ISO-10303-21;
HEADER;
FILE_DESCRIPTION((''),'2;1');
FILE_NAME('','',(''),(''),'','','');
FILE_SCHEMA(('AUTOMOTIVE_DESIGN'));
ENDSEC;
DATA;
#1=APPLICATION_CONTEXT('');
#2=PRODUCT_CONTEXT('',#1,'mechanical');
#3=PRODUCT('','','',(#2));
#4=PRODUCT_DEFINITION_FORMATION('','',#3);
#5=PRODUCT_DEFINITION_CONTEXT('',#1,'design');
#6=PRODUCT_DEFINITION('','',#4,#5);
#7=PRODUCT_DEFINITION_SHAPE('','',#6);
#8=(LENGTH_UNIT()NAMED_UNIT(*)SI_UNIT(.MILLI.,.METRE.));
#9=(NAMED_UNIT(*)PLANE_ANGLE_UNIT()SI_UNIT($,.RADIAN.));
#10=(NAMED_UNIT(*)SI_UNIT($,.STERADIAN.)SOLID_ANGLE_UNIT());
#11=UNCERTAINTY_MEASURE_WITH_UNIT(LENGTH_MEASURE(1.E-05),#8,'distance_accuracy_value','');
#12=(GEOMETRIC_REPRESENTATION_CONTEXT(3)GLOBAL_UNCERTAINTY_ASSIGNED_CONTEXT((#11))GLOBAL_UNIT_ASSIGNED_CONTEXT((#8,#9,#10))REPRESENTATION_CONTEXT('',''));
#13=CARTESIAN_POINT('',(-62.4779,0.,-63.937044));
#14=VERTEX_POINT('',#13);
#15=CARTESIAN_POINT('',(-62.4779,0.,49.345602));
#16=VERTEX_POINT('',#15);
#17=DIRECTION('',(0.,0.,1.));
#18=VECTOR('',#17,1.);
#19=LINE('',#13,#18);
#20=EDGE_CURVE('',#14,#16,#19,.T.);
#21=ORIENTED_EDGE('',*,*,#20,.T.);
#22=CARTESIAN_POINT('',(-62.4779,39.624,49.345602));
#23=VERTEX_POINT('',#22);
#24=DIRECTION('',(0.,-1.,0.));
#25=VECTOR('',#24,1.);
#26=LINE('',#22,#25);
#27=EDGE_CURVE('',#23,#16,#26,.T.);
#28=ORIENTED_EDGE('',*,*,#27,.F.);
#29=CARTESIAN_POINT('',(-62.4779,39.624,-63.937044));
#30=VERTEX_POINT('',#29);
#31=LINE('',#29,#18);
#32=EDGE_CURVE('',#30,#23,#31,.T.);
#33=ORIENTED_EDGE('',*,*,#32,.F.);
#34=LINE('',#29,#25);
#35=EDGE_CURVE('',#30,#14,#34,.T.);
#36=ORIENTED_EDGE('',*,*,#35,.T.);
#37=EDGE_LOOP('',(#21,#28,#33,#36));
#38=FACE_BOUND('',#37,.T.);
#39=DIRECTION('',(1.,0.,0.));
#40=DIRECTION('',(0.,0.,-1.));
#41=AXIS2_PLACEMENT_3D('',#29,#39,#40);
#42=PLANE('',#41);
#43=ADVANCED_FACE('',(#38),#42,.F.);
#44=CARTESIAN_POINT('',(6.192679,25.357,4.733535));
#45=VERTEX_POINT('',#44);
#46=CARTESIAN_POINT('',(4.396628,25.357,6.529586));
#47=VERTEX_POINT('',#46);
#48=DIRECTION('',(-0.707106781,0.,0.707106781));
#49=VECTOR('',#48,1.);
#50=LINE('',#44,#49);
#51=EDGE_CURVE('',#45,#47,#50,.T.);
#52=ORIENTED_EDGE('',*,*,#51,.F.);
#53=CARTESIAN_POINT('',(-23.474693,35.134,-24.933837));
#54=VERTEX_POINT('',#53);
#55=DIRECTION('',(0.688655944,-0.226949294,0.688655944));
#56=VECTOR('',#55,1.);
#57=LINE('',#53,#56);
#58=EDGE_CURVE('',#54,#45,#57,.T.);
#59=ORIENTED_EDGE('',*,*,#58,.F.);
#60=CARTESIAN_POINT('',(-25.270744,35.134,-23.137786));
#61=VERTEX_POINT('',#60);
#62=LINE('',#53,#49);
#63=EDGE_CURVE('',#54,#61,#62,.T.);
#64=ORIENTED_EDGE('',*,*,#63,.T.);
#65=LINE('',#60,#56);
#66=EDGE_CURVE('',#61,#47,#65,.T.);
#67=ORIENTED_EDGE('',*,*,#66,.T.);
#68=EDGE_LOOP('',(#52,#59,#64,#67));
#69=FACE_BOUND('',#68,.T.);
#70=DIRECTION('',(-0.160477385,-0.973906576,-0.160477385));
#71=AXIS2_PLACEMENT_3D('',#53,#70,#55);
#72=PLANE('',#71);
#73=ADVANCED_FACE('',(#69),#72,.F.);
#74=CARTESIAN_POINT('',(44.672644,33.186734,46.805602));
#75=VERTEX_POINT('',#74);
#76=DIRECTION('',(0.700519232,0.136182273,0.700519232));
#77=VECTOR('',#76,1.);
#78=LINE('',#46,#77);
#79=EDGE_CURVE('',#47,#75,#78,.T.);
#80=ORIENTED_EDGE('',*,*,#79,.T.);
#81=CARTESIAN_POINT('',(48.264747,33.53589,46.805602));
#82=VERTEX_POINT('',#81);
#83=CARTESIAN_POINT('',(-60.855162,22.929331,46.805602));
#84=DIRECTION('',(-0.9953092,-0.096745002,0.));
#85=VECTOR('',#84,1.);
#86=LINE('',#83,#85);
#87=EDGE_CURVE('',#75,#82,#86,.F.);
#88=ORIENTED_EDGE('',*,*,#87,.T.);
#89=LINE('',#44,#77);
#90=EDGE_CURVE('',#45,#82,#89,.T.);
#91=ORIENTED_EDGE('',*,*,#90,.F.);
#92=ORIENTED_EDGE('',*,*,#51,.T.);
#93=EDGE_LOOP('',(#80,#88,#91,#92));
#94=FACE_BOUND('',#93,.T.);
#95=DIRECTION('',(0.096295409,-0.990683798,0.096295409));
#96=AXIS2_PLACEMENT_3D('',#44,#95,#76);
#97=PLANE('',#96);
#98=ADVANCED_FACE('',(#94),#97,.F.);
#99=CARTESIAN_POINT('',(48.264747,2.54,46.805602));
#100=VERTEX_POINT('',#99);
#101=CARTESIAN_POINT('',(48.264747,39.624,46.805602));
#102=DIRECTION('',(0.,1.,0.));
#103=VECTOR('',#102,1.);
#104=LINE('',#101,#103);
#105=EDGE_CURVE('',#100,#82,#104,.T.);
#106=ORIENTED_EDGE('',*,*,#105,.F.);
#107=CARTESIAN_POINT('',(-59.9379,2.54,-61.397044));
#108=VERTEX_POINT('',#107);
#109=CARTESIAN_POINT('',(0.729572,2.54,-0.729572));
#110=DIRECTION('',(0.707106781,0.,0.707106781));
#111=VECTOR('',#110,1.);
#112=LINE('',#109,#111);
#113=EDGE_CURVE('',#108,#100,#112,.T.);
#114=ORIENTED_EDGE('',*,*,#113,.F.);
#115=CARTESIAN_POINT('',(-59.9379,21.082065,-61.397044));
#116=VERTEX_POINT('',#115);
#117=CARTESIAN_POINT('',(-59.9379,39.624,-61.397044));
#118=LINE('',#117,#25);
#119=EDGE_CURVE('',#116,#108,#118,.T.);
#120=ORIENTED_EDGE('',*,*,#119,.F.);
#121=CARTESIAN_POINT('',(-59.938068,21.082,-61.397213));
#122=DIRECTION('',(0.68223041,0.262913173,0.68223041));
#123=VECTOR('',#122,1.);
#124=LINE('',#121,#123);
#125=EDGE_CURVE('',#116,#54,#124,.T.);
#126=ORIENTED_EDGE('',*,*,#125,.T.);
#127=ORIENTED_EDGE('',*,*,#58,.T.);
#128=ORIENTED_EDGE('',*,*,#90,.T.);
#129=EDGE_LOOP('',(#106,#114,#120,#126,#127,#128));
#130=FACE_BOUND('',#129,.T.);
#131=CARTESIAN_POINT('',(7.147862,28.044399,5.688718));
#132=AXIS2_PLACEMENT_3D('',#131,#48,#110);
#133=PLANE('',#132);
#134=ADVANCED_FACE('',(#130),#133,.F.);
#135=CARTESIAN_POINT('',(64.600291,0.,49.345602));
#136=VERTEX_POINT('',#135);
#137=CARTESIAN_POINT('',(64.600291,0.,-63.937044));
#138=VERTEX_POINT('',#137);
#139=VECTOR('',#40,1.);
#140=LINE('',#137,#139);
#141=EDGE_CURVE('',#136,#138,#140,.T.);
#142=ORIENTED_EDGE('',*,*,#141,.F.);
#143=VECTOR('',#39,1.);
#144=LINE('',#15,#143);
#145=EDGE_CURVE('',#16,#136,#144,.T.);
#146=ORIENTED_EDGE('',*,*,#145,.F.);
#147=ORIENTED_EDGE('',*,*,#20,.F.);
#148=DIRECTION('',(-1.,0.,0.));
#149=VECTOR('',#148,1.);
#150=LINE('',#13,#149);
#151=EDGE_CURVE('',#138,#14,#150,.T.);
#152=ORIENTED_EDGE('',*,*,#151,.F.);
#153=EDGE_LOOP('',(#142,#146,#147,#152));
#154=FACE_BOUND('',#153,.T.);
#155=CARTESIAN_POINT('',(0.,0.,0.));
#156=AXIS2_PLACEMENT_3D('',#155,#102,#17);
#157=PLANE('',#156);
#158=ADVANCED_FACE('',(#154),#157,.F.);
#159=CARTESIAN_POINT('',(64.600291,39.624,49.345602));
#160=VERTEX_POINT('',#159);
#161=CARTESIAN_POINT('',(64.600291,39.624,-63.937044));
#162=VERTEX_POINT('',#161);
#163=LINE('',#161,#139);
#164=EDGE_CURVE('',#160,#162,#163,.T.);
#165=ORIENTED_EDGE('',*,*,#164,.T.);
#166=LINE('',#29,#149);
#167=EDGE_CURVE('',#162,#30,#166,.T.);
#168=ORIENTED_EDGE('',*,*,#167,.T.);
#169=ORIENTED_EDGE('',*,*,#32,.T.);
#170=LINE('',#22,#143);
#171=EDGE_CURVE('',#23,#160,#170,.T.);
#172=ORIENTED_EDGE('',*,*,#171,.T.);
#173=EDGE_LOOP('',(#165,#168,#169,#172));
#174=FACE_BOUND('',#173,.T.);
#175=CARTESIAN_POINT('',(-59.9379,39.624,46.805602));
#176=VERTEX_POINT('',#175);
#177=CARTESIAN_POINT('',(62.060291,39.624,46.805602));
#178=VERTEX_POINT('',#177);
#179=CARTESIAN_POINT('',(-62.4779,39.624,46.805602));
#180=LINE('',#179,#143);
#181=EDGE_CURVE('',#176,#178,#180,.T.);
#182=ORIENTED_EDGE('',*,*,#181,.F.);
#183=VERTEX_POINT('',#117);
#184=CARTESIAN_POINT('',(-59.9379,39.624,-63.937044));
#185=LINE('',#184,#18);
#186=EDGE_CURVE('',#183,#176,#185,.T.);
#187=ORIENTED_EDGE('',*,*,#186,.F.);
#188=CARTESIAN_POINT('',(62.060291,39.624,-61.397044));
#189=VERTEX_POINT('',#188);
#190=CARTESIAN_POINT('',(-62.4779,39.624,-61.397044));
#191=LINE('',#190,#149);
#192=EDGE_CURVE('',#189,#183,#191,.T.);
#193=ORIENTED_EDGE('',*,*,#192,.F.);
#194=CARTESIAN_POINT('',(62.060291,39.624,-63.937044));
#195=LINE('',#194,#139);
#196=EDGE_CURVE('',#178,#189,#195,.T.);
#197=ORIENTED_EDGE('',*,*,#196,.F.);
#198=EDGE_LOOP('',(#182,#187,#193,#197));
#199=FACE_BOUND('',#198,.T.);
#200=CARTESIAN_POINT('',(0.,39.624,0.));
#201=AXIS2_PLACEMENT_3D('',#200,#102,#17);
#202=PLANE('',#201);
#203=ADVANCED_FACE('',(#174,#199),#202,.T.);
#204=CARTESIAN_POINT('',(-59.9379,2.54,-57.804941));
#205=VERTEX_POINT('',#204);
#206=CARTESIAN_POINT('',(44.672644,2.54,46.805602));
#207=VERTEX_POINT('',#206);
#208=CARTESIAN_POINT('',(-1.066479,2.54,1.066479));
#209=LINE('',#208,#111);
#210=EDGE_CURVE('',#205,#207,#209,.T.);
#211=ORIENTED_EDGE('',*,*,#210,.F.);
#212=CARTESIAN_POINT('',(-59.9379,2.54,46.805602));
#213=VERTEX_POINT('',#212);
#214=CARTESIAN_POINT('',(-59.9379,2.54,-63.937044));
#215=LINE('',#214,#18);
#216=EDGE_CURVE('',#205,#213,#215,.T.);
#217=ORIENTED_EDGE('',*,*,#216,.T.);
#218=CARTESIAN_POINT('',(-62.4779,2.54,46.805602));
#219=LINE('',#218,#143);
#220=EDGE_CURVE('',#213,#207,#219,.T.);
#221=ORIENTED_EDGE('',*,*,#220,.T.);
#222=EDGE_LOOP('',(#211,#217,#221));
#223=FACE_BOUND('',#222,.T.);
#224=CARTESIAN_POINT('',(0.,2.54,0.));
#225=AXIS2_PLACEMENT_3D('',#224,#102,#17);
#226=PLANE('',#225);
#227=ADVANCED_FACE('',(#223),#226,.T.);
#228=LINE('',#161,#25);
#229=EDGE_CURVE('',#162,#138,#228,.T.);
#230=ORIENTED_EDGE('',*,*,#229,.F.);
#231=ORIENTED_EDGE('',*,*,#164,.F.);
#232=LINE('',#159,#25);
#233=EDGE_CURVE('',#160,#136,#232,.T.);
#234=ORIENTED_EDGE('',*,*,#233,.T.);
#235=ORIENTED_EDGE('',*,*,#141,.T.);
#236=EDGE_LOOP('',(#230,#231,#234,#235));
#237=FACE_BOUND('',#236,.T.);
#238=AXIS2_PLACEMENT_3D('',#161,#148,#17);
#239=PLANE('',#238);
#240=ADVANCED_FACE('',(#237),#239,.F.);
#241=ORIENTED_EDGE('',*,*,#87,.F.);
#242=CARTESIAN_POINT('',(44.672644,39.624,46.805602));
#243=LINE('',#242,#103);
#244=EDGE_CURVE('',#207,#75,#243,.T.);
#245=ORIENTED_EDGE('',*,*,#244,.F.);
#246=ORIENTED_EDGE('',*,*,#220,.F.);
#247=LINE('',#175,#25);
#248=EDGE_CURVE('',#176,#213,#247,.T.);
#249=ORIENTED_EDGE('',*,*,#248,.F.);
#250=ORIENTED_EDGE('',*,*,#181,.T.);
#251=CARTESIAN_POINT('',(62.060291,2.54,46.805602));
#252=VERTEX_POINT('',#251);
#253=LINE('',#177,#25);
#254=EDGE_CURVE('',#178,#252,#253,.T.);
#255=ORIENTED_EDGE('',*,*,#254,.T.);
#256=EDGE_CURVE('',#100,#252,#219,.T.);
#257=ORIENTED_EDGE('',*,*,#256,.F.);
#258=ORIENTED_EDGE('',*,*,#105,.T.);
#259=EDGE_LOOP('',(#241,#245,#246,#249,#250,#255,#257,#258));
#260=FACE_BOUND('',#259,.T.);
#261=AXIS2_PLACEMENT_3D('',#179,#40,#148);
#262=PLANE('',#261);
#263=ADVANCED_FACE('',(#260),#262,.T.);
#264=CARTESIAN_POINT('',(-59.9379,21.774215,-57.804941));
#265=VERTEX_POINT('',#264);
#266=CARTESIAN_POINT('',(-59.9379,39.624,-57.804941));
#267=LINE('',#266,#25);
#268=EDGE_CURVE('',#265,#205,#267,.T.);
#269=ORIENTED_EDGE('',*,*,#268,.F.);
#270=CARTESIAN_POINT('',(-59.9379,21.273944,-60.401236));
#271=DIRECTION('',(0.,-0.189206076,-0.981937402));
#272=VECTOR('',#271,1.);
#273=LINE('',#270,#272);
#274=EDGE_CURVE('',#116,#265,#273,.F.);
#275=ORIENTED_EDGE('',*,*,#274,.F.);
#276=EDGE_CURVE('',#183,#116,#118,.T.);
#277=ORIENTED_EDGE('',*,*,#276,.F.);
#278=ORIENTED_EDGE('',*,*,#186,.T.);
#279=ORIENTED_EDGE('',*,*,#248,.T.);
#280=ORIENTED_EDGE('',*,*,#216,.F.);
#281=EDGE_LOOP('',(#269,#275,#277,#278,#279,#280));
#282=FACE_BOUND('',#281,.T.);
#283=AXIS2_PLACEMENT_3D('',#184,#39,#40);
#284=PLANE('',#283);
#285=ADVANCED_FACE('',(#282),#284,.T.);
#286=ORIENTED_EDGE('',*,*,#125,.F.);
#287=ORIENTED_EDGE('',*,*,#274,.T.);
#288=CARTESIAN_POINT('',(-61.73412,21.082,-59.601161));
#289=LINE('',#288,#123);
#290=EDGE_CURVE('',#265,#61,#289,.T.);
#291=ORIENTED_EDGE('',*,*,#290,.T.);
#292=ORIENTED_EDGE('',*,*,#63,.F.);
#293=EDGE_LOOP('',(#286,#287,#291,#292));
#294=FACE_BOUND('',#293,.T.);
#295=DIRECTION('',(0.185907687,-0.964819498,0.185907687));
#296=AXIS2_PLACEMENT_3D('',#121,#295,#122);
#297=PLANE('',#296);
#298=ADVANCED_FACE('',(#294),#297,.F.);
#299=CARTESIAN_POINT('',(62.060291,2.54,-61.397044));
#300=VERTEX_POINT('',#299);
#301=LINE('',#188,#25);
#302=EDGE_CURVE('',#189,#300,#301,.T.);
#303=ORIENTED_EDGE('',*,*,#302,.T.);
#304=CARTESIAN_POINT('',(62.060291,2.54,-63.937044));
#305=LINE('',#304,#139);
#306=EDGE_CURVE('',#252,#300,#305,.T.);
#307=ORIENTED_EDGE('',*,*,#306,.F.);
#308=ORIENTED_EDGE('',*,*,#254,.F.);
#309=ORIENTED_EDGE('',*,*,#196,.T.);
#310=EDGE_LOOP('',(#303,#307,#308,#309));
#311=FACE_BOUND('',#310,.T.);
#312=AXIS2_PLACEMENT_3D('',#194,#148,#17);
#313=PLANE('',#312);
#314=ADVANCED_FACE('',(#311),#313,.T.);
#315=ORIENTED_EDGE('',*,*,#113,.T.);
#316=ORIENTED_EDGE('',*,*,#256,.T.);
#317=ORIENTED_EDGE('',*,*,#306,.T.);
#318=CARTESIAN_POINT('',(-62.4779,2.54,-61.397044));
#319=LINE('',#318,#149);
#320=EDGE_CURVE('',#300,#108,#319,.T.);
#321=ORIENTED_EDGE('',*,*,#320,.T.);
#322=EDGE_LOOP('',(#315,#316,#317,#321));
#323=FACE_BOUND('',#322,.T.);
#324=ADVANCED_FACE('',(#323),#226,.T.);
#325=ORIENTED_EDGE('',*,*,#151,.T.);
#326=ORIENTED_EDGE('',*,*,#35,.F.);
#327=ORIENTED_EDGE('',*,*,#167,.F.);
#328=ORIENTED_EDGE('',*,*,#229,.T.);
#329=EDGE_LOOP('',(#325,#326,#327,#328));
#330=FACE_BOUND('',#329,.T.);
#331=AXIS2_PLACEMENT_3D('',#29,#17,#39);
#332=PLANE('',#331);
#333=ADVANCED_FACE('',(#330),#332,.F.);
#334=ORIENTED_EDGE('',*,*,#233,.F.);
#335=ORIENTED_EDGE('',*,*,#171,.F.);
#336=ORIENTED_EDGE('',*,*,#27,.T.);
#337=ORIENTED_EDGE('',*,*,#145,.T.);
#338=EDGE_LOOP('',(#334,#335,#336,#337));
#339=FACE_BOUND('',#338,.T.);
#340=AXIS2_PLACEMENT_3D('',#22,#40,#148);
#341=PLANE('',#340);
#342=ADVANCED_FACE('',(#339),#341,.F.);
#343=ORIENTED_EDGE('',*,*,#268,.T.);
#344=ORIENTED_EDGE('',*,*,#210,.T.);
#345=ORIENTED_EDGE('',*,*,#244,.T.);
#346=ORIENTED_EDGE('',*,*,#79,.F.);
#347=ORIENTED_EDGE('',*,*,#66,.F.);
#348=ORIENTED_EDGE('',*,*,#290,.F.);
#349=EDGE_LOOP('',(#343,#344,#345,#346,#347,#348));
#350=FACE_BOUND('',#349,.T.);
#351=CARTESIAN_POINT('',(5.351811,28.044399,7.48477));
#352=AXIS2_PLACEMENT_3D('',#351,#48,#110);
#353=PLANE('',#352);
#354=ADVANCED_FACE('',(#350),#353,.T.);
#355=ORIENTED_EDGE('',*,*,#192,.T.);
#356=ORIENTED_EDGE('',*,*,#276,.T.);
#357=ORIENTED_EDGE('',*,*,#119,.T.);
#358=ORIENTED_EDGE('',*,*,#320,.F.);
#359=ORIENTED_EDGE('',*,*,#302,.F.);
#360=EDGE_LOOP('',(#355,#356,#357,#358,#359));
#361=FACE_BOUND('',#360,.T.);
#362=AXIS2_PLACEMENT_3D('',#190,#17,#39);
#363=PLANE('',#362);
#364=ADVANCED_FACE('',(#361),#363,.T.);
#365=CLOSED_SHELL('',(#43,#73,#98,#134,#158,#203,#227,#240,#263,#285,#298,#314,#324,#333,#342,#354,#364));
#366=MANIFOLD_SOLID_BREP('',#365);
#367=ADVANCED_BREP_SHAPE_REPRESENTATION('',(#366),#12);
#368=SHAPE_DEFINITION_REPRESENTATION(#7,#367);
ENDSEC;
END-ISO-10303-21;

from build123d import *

# Parameters (mm, degrees)
SKETCH1_W                  = 127.078191072
SKETCH1_H                  = 113.282646321
BOSS_EXTRUDE1_DEPTH        = 39.624
SHELL_1_T                  = -2.54
OFFICIAL_RIB_BLOCK20_DEPTH = 2.54


# Read off the part's stored shape, not the designer's step: official_rib_block20
with BuildPart() as part:
    # Sketch1 → Boss-Extrude1 (new body)
    with BuildSketch(Plane(origin=(0, 0, 0), x_dir=(1, 0, 0), z_dir=(0, 1, 0))):
        with Locations((1.06119575, 7.295720781)):
            Rectangle(SKETCH1_W, SKETCH1_H)
    extrude(amount=BOSS_EXTRUDE1_DEPTH)

    # 抽壳1
    shell_1_openings = [part.faces().sort_by_distance(p)[0] for p in [
        (1.06119575, 39.624, -7.295720782),
    ]]
    offset(amount=SHELL_1_T, openings=shell_1_openings, kind=Kind.INTERSECTION)

    # official_rib_block20 outline → official_rib_block20 (add)
    with BuildSketch(Plane(origin=(0.729572078, 0, -0.729572078), x_dir=(0.7071067811865477, 0, 0.7071067811865475), z_dir=(-0.7071067811865475, 0, 0.7071067811865477))):
        Polygon((67.224888407, 33.535890054), (7.726, 25.357), (-34.23, 35.134), (-85.796761505, 21.08206499), (-86, 21.02668253), (-86, 2), (68, 2), (68, 33.642439145), align=None)
    extrude(amount=OFFICIAL_RIB_BLOCK20_DEPTH)


solid = part.part
